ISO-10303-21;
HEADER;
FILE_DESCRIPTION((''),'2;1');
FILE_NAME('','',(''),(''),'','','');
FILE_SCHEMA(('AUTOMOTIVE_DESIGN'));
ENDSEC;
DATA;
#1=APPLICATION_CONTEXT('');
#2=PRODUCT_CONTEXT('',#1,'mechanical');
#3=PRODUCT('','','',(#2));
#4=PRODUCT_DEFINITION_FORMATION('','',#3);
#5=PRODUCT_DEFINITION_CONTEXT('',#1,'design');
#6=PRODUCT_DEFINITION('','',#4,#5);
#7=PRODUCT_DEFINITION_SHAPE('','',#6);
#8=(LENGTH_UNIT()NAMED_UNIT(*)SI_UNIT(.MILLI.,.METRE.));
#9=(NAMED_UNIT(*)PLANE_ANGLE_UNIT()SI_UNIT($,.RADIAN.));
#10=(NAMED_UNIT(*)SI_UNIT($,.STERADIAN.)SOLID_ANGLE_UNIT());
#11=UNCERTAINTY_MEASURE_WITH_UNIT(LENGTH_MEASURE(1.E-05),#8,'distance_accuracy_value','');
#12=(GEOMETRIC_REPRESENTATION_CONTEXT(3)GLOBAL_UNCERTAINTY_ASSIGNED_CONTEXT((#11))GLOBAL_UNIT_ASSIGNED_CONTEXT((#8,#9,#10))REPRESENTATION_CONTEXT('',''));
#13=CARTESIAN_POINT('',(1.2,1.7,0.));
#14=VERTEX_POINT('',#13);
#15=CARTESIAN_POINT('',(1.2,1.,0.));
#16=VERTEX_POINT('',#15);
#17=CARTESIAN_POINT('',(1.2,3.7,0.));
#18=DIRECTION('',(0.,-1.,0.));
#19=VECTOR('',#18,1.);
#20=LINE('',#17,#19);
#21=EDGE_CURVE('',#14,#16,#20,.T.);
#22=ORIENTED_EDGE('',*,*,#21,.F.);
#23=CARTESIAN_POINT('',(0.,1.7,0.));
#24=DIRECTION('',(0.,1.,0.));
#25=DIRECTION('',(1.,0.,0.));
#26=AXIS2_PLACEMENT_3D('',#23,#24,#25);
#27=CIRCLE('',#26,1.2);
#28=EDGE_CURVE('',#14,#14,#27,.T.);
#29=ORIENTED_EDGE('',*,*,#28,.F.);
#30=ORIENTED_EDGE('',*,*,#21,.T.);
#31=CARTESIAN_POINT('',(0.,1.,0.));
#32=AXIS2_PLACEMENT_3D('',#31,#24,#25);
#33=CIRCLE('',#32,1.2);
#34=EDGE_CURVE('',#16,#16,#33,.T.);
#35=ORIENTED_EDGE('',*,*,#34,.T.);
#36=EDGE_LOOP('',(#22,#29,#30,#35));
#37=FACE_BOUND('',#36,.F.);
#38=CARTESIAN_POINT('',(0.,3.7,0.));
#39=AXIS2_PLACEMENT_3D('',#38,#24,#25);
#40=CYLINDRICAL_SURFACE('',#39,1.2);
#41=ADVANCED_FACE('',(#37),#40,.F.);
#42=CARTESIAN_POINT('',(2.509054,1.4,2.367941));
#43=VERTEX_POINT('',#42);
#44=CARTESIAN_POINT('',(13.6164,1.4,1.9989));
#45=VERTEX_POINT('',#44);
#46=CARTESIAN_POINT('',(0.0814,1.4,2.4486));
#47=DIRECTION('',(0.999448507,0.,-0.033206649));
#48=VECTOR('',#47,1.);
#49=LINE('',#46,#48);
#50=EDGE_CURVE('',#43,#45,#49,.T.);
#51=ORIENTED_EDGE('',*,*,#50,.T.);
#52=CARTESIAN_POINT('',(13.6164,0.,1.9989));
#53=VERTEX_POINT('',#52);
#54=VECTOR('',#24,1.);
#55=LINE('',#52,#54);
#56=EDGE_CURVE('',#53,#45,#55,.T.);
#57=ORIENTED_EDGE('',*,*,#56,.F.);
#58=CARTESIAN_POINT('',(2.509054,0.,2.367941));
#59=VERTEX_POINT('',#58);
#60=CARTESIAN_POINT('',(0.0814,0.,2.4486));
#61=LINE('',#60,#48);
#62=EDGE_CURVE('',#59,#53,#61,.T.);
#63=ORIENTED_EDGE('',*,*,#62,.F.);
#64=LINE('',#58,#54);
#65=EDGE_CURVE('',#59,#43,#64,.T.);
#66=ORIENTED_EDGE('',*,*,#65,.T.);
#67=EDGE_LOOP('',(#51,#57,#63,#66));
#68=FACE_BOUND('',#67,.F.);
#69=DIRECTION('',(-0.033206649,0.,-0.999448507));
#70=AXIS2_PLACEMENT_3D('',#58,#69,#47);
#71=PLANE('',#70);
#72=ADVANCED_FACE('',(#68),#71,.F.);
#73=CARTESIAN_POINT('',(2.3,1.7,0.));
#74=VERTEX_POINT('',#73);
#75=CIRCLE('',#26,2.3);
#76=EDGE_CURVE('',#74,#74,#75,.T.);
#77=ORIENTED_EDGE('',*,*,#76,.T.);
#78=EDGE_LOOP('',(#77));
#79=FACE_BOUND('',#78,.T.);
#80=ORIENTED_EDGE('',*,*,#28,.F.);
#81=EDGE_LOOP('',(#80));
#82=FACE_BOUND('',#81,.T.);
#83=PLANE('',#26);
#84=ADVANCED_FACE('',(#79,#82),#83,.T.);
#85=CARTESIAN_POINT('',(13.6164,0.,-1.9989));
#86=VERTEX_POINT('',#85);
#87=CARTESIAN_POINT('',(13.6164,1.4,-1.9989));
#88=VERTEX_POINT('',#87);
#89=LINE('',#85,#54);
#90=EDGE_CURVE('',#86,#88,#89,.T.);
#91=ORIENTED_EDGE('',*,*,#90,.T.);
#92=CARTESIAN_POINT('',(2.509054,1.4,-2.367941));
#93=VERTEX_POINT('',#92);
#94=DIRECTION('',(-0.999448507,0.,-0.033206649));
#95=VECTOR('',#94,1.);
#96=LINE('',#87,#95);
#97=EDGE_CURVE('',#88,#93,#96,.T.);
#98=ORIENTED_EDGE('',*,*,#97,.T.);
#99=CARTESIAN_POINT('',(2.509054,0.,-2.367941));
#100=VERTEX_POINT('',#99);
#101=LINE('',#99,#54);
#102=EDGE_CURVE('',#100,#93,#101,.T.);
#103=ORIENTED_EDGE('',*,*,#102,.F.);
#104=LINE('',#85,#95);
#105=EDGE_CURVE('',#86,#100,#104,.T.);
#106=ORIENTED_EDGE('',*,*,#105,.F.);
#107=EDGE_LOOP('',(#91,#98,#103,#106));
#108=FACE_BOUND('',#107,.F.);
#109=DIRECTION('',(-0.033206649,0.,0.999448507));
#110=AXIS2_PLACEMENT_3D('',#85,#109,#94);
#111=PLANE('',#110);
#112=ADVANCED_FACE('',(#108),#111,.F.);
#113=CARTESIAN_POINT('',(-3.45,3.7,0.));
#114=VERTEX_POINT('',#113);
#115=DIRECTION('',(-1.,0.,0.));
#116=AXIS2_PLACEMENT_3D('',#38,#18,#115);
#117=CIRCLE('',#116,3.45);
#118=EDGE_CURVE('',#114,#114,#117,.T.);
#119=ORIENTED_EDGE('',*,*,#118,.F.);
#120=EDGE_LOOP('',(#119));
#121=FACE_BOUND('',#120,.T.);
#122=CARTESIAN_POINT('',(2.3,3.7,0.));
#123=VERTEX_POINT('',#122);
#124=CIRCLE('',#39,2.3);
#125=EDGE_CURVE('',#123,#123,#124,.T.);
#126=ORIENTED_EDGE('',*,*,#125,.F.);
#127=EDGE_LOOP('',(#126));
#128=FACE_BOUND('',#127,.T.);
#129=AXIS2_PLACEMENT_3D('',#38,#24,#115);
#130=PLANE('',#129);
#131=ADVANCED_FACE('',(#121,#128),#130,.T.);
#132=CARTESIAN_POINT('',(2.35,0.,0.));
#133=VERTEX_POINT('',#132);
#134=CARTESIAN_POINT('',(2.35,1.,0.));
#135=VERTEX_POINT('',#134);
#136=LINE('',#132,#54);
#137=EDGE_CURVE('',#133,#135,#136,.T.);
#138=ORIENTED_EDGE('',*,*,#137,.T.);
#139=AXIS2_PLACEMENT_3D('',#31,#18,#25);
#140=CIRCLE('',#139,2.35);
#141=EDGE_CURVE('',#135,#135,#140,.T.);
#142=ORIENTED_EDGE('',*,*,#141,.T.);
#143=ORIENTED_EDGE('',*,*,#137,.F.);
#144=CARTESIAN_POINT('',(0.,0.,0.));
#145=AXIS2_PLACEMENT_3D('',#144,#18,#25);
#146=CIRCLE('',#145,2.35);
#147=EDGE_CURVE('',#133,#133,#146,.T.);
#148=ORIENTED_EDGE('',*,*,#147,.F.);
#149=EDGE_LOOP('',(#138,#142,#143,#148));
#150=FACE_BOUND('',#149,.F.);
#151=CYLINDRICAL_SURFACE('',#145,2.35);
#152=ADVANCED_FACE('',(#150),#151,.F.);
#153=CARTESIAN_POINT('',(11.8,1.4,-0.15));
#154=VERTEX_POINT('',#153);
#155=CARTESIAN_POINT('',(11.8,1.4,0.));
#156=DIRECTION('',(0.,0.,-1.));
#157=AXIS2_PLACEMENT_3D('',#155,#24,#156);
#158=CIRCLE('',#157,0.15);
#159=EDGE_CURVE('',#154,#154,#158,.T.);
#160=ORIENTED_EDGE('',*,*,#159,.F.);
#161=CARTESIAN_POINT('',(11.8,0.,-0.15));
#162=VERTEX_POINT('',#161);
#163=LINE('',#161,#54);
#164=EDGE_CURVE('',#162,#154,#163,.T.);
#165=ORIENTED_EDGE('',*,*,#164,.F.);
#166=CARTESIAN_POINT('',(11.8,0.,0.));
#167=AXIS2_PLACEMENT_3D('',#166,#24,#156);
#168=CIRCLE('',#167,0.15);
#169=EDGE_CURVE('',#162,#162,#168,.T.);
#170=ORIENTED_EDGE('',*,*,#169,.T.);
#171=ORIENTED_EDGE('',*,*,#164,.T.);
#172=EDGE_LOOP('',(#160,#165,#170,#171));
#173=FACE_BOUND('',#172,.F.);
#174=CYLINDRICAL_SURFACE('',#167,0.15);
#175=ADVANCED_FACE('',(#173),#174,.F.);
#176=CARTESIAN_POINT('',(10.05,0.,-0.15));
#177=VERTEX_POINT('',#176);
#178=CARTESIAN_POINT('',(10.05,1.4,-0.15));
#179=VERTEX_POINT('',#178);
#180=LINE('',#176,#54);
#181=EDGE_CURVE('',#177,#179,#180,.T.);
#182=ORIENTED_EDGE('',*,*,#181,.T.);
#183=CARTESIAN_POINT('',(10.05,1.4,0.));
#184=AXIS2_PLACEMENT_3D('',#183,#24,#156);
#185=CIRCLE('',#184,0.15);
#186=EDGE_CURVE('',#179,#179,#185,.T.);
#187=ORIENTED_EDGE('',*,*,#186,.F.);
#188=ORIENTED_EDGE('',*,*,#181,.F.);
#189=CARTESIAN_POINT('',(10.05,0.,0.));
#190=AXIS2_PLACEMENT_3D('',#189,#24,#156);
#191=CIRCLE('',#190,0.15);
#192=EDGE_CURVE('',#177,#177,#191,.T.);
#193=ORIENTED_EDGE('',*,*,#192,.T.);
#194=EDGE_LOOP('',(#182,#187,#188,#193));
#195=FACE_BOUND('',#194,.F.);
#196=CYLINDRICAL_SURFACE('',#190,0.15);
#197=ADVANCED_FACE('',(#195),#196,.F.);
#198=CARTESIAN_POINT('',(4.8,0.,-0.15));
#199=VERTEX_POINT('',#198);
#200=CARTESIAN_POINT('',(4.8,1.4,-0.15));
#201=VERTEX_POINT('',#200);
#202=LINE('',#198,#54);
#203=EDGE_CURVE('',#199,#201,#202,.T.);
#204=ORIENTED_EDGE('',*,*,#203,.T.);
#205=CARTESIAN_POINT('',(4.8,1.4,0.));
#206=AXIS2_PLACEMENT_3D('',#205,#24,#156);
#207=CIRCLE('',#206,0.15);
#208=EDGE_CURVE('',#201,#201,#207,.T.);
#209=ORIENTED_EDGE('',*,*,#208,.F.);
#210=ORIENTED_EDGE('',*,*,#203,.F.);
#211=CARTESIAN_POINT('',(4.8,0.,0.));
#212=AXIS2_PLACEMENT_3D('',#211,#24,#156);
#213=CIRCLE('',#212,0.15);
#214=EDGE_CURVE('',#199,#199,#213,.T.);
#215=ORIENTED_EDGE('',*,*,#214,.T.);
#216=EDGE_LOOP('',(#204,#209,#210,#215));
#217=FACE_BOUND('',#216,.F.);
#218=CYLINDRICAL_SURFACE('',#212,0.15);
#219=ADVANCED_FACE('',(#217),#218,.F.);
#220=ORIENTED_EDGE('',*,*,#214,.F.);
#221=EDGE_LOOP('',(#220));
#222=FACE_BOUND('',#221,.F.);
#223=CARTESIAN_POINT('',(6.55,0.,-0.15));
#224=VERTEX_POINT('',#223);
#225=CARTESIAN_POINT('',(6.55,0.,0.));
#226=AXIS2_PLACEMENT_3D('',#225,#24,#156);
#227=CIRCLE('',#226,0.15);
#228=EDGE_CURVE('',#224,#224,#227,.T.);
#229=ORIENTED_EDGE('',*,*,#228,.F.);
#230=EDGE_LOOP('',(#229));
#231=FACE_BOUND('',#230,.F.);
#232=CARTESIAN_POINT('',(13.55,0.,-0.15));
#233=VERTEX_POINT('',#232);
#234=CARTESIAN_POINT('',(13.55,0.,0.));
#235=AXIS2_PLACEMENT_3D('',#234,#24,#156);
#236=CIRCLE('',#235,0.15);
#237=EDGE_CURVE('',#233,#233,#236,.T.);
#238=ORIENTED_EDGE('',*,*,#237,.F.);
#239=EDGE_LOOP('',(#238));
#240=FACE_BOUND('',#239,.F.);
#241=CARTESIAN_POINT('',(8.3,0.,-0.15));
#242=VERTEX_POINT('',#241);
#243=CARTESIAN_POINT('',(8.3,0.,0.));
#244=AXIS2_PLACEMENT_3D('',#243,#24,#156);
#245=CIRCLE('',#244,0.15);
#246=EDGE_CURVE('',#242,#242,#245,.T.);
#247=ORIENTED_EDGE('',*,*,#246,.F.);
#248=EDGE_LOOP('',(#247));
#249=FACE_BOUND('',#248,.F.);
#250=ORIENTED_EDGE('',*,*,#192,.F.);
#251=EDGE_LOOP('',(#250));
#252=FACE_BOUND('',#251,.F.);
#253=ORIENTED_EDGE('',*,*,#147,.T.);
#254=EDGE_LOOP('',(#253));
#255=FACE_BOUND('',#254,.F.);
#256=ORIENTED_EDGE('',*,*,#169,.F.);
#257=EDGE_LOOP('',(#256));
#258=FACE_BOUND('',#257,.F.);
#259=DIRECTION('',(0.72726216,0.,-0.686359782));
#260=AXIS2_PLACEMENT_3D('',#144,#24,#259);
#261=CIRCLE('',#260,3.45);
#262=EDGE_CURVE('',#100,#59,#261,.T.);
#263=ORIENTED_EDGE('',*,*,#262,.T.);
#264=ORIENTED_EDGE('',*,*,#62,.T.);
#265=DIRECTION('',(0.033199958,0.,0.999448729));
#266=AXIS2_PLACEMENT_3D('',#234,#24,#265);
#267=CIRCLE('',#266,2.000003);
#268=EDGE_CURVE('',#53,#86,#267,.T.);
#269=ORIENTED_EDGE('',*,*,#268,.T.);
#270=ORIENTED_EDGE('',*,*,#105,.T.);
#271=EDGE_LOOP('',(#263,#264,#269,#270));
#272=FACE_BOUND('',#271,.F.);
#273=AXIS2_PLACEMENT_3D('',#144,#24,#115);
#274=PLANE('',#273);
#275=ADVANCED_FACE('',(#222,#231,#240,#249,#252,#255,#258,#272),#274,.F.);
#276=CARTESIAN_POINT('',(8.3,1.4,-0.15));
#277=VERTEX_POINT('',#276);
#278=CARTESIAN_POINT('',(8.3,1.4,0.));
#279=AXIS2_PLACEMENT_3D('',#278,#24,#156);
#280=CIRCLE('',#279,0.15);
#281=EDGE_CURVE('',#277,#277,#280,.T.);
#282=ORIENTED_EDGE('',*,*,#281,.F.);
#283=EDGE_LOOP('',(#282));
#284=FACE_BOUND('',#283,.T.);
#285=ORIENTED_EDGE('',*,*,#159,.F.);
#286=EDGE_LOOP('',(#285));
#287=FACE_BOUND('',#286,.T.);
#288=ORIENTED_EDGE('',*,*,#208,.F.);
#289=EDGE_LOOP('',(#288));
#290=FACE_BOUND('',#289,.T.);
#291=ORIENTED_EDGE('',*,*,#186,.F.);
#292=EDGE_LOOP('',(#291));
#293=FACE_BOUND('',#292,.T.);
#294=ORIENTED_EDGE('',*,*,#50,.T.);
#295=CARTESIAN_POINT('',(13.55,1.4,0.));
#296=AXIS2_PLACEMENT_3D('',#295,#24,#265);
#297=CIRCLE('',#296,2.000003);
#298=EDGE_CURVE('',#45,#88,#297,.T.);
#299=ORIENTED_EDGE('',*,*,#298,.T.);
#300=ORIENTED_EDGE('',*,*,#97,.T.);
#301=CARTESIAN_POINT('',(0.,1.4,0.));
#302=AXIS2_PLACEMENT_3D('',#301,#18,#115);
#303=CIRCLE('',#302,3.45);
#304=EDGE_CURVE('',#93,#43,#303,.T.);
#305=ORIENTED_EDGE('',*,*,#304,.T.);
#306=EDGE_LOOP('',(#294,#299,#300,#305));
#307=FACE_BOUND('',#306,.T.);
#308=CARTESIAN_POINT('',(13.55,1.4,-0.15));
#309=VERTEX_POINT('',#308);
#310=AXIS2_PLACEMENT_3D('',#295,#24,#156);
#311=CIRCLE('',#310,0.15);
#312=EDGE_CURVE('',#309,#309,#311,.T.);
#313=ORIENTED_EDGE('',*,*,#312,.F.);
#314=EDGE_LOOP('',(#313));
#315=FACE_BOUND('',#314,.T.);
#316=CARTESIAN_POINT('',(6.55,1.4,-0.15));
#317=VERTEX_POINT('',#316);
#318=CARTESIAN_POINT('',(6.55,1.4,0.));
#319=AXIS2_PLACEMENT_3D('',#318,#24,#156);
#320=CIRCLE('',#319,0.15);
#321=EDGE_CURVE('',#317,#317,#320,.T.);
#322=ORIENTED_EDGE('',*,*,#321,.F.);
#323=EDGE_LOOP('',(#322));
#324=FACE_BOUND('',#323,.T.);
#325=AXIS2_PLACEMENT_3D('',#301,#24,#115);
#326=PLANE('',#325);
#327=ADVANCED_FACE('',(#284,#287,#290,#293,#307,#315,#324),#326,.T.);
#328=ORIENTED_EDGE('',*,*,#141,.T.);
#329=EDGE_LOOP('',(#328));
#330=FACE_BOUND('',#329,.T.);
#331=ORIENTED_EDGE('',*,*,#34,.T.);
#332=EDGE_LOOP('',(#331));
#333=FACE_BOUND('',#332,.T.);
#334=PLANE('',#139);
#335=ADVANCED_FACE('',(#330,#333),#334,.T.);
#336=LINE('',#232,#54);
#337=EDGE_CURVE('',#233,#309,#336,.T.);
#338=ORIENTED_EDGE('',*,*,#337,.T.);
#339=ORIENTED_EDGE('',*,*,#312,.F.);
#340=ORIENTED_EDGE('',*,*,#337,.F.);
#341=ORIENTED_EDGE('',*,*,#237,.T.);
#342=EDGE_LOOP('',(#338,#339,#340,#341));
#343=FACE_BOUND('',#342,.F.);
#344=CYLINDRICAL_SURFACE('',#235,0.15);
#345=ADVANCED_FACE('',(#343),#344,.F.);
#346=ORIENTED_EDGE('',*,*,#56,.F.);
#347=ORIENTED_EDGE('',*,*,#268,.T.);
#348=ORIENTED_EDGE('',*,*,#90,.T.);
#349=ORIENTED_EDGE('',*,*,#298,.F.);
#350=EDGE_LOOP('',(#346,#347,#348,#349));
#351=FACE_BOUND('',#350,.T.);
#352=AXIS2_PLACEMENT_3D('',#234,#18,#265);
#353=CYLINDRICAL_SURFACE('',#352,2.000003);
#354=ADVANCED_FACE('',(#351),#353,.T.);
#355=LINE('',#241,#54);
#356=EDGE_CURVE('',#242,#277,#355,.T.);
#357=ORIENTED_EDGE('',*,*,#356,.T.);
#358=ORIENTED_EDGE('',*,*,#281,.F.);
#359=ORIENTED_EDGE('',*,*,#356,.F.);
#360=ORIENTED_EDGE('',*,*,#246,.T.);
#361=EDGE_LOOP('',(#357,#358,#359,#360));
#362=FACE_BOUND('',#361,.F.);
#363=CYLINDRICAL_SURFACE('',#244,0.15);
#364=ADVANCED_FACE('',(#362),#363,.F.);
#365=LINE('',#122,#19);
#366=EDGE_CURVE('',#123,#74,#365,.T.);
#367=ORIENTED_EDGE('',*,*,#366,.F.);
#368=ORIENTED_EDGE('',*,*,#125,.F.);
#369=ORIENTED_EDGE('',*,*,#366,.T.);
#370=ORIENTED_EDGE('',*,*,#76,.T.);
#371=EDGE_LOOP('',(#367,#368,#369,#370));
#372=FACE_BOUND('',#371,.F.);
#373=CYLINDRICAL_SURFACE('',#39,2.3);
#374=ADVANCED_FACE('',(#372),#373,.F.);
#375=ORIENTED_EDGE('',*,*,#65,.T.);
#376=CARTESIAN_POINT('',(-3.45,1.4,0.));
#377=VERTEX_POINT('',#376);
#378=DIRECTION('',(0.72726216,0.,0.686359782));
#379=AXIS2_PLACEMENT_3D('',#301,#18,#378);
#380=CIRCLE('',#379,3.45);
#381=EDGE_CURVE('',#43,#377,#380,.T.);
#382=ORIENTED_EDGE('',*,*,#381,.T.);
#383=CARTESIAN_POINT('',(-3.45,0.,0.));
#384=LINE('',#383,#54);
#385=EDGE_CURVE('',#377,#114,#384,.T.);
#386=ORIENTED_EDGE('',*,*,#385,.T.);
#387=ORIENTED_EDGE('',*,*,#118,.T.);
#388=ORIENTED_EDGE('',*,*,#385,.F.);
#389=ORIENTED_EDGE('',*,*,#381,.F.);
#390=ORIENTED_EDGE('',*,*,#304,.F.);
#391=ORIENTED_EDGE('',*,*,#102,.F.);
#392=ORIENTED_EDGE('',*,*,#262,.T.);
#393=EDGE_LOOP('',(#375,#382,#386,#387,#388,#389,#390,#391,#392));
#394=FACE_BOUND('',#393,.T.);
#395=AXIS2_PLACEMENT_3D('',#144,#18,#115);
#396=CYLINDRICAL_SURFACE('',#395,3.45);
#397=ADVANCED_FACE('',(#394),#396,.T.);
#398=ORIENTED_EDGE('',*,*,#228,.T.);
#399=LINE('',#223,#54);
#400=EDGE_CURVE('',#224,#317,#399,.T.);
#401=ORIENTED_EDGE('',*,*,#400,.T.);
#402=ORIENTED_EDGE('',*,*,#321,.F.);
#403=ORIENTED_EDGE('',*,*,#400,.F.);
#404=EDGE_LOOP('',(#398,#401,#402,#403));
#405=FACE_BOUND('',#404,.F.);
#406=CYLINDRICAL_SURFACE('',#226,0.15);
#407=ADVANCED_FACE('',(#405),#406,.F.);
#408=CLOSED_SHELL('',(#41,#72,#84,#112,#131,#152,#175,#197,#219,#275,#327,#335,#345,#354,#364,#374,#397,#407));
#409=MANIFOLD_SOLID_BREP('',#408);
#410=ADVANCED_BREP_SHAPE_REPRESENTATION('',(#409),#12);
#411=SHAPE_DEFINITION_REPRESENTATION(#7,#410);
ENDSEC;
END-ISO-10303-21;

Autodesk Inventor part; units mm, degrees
ref_plane "YZ Plane" through (0, 0, 0) normal (1, 0, 0) x (0, 1, 0)
ref_plane "XZ Plane" through (0, 0, 0) normal (0, 1, 0) x (-1, 0, 0)
ref_plane "XY Plane" through (0, 0, 0) normal (0, 0, 1) x (1, 0, 0)
sketch "Sketch1" plane through (0, 0, 0) normal (0, 1, 0) x (-1, 0, 0)
  circle A0 centre (0, 0) radius 3.45
  line L0 (0, 0) -> (-13.55, 0) construction
  line L1 (-0.0814, 2.4486) -> (-13.6164, 1.9989)
  line L2 (-13.6164, -1.9989) -> (-0.0814, -2.4486)
  arc A1 (-0.0814, -2.4486) -> (-0.0814, 2.4486) centre (0, 0) ccw
  arc A2 (-13.6164, 1.9989) -> (-13.6164, -1.9989) centre (-13.55, 0) ccw
  point P0 (-6.775, 0)
  point P1 (-15.55, 0)
  point P2 (3.45, 0)
  dimension "d0" = 6.9
  dimension "d2" = 4
  dimension "d3" = 1
  dimension "d4" = 19
extrude "Extrusion1" add sketch "Sketch1" along normal blind 1.4
extrude "Extrusion2" add sketch "Sketch1" along normal blind 3.7 contours A0 L2 A1 L1 | L1 A1 L2 A0
sketch "Sketch2" plane through (0, 3.7, 0) normal (0, 1, 0) x (1, 0, 0)
  circle A0 centre (0, 0) radius 3.45 construction
  circle A1 centre (0, 0) radius 1.2
  dimension "d9" = 2.4
extrude "Extrusion3" cut sketch "Sketch2" against normal through all
sketch "Sketch3" plane through (0, 3.7, 0) normal (0, 1, 0) x (1, 0, 0)
  circle A0 centre (0, 0) radius 3.45 construction
  circle A1 centre (0, 0) radius 2.3
  dimension "d12" = 4.6
extrude "Extrusion4" cut sketch "Sketch3" against normal blind 2
sketch "Sketch4" plane through (0, 0, 0) normal (0, -1, 0) x (1, 0, 0)
  arc A0 (2.509, 2.368) -> (2.509, -2.368) centre (0, 0) ccw construction
  circle A1 centre (0, 0) radius 2.35
  dimension "d15" = 1.1
extrude "Extrusion5" cut sketch "Sketch4" against normal blind 1
sketch "Sketch5" plane through (0, 0, 0) normal (0, -1, 0) x (1, 0, 0)
  arc A0 (13.6164, -1.9989) -> (13.6164, 1.9989) centre (13.55, 0) ccw construction
  line L0 (13.55, 0) -> (10.05, 0)
  line L1 (10.05, 0) -> (6.55, 0)
  line L2 (6.55, 0) -> (3.05, 0)
  point P0 (8.3, 0)
  point P1 (4.8, 0)
  point P2 (11.8, 0)
  point P3 (4.8, 0)
  dimension "d18" = 3.5
hole "Hole1" at (13.55, 0, 0) at (10.05, 0, 0) at (8.3, 0, 0) at (6.55, 0, 0) at (4.8, 0, 0) at (11.8, 0, 0) direction (0, 1, 0) diameter 0.3 end through all
properties part number "SG90Horn1" material "PC/ABS Plastic"
